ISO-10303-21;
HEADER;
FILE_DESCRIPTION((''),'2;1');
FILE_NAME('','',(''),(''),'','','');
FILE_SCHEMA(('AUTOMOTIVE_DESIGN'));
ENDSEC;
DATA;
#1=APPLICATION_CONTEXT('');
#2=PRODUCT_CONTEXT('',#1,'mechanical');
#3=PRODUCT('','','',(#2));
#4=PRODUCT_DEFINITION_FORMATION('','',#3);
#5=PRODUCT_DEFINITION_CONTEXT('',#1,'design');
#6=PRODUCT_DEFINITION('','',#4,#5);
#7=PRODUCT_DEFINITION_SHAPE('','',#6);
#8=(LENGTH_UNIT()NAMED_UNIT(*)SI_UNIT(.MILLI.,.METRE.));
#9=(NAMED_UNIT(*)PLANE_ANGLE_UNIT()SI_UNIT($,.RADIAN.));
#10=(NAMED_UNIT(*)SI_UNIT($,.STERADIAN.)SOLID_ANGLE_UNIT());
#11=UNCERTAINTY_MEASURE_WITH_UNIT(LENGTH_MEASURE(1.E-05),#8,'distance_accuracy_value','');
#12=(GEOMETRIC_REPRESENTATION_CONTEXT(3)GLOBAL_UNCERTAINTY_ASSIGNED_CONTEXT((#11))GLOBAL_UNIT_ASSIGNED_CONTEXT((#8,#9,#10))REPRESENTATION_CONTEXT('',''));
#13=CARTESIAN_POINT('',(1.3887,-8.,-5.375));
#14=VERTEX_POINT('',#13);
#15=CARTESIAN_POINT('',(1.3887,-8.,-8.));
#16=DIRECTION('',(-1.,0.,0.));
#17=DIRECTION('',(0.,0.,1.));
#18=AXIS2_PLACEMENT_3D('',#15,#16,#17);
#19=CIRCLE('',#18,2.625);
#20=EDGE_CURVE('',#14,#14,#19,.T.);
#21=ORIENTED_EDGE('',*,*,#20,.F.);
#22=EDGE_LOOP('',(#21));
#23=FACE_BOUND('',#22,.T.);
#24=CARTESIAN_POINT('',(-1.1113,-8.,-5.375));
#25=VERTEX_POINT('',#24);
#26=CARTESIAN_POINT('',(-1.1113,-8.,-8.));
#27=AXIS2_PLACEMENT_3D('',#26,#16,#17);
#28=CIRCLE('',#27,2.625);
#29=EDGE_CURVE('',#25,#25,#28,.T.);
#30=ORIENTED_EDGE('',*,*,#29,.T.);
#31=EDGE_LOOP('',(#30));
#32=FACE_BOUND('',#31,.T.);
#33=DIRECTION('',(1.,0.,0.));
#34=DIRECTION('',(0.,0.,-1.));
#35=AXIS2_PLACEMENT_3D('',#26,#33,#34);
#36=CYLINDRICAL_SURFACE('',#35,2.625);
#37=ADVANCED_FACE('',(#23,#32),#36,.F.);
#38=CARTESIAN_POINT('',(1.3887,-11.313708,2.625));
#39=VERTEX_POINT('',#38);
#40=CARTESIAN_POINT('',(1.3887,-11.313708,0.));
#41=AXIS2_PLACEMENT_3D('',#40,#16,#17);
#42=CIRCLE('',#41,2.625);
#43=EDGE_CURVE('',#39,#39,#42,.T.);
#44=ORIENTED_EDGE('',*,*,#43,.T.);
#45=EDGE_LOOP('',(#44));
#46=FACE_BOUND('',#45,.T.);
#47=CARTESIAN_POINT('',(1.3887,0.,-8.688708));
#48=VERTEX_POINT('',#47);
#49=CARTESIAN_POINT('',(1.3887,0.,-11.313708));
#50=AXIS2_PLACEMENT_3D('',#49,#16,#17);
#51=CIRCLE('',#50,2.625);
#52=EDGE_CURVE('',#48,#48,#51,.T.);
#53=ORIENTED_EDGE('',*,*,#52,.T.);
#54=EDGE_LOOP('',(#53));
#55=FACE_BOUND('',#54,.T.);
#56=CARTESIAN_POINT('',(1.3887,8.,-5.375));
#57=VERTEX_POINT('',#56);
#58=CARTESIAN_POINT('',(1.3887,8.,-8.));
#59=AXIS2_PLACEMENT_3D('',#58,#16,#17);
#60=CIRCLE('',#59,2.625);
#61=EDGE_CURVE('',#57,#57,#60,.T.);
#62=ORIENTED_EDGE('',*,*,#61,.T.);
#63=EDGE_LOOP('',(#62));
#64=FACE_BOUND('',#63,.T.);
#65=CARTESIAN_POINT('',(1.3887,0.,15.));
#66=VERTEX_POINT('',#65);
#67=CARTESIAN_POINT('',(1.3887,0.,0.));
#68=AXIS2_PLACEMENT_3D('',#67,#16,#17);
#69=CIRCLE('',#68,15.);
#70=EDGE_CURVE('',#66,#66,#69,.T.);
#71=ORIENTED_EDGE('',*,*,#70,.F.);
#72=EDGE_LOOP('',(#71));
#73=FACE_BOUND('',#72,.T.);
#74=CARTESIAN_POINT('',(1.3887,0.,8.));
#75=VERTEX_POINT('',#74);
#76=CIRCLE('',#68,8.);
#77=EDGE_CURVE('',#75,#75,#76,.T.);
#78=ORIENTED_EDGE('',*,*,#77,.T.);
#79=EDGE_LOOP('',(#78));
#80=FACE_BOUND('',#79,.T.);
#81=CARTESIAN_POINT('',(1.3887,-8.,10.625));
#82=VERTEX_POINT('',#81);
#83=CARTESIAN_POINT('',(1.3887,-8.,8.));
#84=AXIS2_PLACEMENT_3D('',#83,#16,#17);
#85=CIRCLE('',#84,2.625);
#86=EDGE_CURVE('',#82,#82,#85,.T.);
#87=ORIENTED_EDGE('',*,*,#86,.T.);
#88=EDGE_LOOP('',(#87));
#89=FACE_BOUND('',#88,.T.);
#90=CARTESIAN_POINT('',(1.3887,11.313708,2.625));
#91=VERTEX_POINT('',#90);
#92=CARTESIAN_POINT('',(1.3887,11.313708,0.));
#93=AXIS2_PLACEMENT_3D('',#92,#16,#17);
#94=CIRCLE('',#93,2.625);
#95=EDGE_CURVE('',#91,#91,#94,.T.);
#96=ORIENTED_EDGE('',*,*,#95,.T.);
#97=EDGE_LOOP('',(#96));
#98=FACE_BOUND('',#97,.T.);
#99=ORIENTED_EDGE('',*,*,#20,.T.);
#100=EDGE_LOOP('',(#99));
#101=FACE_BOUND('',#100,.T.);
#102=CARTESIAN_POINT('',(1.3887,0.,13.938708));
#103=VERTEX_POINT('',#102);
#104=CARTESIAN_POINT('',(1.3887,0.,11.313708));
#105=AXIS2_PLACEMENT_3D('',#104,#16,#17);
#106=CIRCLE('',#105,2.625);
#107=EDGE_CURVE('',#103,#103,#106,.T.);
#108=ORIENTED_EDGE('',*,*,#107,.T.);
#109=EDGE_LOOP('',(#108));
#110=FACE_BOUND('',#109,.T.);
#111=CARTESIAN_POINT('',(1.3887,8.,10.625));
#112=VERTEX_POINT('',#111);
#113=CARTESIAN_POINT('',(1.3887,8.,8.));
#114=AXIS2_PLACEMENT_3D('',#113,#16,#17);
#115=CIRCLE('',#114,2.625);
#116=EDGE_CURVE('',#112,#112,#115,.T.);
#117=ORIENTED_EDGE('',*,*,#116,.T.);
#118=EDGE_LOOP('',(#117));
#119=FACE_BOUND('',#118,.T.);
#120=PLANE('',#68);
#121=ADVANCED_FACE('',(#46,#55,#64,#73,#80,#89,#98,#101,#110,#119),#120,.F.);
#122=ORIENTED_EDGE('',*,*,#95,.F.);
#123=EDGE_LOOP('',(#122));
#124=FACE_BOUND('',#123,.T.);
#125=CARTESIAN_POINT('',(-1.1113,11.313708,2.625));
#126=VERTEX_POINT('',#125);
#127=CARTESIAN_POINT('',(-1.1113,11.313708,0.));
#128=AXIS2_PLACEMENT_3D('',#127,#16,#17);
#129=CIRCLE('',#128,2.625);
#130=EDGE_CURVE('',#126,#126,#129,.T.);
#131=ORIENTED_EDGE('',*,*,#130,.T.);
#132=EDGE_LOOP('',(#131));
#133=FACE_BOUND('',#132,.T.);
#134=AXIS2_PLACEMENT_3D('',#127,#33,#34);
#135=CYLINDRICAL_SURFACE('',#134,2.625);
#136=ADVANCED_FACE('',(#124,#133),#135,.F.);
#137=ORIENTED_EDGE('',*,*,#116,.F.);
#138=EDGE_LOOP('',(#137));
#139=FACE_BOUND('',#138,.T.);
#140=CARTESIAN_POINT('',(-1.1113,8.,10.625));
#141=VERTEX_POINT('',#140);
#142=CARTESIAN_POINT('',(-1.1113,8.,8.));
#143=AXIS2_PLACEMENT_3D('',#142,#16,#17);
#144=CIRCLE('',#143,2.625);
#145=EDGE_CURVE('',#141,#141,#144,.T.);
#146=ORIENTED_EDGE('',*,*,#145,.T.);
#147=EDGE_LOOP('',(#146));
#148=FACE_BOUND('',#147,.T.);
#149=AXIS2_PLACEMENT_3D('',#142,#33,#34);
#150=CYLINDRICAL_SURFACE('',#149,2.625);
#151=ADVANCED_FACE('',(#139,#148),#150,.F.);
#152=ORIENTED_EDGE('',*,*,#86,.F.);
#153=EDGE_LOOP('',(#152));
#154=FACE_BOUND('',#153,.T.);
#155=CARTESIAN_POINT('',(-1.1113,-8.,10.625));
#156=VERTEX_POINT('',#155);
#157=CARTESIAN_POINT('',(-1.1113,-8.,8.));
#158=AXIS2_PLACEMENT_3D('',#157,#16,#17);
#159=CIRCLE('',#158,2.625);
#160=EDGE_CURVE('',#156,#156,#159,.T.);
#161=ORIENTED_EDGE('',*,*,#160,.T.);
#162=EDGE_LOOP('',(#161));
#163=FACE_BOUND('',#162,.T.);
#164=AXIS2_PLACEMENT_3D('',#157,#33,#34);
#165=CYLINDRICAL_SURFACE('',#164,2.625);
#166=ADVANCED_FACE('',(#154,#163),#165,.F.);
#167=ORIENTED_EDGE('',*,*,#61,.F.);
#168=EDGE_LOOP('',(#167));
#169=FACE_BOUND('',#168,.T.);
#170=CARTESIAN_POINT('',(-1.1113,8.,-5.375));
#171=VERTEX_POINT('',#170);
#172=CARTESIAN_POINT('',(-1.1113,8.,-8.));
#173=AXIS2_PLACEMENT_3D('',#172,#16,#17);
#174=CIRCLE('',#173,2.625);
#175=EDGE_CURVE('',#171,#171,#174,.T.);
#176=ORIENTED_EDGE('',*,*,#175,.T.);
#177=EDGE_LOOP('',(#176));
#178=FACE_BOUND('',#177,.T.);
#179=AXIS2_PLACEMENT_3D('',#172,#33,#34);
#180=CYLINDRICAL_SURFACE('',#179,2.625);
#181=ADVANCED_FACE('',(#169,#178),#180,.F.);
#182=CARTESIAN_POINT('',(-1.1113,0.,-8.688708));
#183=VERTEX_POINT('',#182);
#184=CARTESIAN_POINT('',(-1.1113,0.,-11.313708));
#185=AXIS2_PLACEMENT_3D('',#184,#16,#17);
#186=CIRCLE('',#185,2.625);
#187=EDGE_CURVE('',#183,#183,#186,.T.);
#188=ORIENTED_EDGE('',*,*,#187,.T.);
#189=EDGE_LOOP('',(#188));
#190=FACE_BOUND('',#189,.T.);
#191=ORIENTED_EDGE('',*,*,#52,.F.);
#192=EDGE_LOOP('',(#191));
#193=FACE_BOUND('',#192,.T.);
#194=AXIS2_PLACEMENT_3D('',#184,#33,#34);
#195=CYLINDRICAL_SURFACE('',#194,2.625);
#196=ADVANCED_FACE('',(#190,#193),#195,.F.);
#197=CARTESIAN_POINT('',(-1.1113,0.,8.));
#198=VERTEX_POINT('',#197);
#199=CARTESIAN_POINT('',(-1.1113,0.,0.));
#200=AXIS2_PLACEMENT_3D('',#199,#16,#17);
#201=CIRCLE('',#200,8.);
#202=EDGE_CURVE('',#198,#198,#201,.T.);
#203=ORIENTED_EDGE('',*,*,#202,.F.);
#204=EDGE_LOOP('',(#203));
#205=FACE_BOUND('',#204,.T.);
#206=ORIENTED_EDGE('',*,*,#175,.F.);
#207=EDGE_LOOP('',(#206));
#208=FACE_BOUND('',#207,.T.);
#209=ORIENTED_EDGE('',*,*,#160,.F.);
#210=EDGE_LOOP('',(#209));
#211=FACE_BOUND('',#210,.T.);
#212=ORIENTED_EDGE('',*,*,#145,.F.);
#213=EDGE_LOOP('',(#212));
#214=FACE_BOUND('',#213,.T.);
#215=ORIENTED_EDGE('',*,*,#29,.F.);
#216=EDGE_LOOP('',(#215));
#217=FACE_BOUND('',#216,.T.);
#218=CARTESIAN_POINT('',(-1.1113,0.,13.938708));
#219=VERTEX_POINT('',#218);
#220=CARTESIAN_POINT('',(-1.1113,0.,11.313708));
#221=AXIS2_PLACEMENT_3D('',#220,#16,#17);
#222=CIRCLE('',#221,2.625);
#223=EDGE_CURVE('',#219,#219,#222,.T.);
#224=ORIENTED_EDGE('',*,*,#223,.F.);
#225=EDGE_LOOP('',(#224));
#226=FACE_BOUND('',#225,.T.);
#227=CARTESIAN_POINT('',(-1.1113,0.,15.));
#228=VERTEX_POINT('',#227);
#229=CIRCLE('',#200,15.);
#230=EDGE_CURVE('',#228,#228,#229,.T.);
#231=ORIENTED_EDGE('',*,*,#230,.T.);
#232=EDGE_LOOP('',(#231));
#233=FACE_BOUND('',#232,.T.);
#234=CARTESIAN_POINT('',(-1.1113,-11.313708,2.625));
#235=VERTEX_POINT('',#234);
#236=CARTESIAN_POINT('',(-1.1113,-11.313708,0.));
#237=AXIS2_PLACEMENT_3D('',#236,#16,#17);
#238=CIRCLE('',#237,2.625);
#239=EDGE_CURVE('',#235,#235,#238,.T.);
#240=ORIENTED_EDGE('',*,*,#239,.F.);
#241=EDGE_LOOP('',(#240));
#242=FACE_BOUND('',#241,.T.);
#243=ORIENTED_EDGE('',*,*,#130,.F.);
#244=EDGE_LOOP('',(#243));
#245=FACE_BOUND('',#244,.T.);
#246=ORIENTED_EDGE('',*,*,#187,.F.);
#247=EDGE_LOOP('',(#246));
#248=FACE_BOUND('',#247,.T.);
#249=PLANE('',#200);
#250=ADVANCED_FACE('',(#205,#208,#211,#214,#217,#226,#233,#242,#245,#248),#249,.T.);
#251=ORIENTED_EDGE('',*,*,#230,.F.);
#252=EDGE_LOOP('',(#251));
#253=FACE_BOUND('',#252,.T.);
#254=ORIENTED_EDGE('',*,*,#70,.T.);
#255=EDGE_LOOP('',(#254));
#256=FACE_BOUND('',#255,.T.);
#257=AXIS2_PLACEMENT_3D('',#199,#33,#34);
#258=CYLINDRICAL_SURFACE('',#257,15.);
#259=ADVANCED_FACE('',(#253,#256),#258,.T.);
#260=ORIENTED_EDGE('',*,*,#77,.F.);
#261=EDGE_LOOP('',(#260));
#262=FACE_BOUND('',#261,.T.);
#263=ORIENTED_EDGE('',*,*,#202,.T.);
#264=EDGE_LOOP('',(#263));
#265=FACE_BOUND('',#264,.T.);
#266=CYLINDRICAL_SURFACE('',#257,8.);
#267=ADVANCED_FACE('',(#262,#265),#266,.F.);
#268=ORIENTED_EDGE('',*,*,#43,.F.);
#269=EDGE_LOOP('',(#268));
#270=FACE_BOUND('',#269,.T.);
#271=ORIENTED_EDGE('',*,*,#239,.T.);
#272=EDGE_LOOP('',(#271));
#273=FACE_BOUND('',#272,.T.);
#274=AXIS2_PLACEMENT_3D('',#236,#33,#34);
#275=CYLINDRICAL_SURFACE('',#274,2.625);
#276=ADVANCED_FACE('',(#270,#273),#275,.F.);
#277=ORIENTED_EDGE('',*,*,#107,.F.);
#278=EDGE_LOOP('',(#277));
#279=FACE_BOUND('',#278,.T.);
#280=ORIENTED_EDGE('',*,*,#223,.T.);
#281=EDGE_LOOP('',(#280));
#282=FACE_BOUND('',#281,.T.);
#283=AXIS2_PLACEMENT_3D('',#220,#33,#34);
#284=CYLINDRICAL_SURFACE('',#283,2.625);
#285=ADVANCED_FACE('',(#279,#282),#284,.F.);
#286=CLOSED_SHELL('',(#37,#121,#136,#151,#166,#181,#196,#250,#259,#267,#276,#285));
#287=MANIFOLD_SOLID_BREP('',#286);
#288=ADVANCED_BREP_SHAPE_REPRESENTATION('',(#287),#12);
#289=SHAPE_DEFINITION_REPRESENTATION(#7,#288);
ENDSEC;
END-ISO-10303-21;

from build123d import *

# Parameters (mm, degrees)
SKETCH7_R           = 15
SKETCH7_R_2         = 2.625
SKETCH7_R_3         = 8
BOSS_EXTRUDE1_DEPTH = 2.5


# Read off the part's stored shape, not the designer's step: 211-0022 (28 Tooth Bevel Gear).STEP<1>
with BuildPart() as part:
    # Sketch7 → Boss-Extrude1 (new body)
    with BuildSketch(Plane.ZY.offset(-1.3887)):
        Circle(SKETCH7_R)
        with Locations((-8, 8)):
            Circle(SKETCH7_R_2, mode=Mode.SUBTRACT)
        with Locations((-11.313708499, 0)):
            Circle(SKETCH7_R_2, mode=Mode.SUBTRACT)
        with Locations((-8, -8)):
            Circle(SKETCH7_R_2, mode=Mode.SUBTRACT)
        with Locations((0, -11.313708499)):
            Circle(SKETCH7_R_2, mode=Mode.SUBTRACT)
        with Locations((8, -8)):
            Circle(SKETCH7_R_2, mode=Mode.SUBTRACT)
        with Locations((11.313708499, 0)):
            Circle(SKETCH7_R_2, mode=Mode.SUBTRACT)
        with Locations((8, 8)):
            Circle(SKETCH7_R_2, mode=Mode.SUBTRACT)
        with Locations((0, 11.313708499)):
            Circle(SKETCH7_R_2, mode=Mode.SUBTRACT)
        Circle(SKETCH7_R_3, mode=Mode.SUBTRACT)
    extrude(amount=BOSS_EXTRUDE1_DEPTH)


solid = part.part
